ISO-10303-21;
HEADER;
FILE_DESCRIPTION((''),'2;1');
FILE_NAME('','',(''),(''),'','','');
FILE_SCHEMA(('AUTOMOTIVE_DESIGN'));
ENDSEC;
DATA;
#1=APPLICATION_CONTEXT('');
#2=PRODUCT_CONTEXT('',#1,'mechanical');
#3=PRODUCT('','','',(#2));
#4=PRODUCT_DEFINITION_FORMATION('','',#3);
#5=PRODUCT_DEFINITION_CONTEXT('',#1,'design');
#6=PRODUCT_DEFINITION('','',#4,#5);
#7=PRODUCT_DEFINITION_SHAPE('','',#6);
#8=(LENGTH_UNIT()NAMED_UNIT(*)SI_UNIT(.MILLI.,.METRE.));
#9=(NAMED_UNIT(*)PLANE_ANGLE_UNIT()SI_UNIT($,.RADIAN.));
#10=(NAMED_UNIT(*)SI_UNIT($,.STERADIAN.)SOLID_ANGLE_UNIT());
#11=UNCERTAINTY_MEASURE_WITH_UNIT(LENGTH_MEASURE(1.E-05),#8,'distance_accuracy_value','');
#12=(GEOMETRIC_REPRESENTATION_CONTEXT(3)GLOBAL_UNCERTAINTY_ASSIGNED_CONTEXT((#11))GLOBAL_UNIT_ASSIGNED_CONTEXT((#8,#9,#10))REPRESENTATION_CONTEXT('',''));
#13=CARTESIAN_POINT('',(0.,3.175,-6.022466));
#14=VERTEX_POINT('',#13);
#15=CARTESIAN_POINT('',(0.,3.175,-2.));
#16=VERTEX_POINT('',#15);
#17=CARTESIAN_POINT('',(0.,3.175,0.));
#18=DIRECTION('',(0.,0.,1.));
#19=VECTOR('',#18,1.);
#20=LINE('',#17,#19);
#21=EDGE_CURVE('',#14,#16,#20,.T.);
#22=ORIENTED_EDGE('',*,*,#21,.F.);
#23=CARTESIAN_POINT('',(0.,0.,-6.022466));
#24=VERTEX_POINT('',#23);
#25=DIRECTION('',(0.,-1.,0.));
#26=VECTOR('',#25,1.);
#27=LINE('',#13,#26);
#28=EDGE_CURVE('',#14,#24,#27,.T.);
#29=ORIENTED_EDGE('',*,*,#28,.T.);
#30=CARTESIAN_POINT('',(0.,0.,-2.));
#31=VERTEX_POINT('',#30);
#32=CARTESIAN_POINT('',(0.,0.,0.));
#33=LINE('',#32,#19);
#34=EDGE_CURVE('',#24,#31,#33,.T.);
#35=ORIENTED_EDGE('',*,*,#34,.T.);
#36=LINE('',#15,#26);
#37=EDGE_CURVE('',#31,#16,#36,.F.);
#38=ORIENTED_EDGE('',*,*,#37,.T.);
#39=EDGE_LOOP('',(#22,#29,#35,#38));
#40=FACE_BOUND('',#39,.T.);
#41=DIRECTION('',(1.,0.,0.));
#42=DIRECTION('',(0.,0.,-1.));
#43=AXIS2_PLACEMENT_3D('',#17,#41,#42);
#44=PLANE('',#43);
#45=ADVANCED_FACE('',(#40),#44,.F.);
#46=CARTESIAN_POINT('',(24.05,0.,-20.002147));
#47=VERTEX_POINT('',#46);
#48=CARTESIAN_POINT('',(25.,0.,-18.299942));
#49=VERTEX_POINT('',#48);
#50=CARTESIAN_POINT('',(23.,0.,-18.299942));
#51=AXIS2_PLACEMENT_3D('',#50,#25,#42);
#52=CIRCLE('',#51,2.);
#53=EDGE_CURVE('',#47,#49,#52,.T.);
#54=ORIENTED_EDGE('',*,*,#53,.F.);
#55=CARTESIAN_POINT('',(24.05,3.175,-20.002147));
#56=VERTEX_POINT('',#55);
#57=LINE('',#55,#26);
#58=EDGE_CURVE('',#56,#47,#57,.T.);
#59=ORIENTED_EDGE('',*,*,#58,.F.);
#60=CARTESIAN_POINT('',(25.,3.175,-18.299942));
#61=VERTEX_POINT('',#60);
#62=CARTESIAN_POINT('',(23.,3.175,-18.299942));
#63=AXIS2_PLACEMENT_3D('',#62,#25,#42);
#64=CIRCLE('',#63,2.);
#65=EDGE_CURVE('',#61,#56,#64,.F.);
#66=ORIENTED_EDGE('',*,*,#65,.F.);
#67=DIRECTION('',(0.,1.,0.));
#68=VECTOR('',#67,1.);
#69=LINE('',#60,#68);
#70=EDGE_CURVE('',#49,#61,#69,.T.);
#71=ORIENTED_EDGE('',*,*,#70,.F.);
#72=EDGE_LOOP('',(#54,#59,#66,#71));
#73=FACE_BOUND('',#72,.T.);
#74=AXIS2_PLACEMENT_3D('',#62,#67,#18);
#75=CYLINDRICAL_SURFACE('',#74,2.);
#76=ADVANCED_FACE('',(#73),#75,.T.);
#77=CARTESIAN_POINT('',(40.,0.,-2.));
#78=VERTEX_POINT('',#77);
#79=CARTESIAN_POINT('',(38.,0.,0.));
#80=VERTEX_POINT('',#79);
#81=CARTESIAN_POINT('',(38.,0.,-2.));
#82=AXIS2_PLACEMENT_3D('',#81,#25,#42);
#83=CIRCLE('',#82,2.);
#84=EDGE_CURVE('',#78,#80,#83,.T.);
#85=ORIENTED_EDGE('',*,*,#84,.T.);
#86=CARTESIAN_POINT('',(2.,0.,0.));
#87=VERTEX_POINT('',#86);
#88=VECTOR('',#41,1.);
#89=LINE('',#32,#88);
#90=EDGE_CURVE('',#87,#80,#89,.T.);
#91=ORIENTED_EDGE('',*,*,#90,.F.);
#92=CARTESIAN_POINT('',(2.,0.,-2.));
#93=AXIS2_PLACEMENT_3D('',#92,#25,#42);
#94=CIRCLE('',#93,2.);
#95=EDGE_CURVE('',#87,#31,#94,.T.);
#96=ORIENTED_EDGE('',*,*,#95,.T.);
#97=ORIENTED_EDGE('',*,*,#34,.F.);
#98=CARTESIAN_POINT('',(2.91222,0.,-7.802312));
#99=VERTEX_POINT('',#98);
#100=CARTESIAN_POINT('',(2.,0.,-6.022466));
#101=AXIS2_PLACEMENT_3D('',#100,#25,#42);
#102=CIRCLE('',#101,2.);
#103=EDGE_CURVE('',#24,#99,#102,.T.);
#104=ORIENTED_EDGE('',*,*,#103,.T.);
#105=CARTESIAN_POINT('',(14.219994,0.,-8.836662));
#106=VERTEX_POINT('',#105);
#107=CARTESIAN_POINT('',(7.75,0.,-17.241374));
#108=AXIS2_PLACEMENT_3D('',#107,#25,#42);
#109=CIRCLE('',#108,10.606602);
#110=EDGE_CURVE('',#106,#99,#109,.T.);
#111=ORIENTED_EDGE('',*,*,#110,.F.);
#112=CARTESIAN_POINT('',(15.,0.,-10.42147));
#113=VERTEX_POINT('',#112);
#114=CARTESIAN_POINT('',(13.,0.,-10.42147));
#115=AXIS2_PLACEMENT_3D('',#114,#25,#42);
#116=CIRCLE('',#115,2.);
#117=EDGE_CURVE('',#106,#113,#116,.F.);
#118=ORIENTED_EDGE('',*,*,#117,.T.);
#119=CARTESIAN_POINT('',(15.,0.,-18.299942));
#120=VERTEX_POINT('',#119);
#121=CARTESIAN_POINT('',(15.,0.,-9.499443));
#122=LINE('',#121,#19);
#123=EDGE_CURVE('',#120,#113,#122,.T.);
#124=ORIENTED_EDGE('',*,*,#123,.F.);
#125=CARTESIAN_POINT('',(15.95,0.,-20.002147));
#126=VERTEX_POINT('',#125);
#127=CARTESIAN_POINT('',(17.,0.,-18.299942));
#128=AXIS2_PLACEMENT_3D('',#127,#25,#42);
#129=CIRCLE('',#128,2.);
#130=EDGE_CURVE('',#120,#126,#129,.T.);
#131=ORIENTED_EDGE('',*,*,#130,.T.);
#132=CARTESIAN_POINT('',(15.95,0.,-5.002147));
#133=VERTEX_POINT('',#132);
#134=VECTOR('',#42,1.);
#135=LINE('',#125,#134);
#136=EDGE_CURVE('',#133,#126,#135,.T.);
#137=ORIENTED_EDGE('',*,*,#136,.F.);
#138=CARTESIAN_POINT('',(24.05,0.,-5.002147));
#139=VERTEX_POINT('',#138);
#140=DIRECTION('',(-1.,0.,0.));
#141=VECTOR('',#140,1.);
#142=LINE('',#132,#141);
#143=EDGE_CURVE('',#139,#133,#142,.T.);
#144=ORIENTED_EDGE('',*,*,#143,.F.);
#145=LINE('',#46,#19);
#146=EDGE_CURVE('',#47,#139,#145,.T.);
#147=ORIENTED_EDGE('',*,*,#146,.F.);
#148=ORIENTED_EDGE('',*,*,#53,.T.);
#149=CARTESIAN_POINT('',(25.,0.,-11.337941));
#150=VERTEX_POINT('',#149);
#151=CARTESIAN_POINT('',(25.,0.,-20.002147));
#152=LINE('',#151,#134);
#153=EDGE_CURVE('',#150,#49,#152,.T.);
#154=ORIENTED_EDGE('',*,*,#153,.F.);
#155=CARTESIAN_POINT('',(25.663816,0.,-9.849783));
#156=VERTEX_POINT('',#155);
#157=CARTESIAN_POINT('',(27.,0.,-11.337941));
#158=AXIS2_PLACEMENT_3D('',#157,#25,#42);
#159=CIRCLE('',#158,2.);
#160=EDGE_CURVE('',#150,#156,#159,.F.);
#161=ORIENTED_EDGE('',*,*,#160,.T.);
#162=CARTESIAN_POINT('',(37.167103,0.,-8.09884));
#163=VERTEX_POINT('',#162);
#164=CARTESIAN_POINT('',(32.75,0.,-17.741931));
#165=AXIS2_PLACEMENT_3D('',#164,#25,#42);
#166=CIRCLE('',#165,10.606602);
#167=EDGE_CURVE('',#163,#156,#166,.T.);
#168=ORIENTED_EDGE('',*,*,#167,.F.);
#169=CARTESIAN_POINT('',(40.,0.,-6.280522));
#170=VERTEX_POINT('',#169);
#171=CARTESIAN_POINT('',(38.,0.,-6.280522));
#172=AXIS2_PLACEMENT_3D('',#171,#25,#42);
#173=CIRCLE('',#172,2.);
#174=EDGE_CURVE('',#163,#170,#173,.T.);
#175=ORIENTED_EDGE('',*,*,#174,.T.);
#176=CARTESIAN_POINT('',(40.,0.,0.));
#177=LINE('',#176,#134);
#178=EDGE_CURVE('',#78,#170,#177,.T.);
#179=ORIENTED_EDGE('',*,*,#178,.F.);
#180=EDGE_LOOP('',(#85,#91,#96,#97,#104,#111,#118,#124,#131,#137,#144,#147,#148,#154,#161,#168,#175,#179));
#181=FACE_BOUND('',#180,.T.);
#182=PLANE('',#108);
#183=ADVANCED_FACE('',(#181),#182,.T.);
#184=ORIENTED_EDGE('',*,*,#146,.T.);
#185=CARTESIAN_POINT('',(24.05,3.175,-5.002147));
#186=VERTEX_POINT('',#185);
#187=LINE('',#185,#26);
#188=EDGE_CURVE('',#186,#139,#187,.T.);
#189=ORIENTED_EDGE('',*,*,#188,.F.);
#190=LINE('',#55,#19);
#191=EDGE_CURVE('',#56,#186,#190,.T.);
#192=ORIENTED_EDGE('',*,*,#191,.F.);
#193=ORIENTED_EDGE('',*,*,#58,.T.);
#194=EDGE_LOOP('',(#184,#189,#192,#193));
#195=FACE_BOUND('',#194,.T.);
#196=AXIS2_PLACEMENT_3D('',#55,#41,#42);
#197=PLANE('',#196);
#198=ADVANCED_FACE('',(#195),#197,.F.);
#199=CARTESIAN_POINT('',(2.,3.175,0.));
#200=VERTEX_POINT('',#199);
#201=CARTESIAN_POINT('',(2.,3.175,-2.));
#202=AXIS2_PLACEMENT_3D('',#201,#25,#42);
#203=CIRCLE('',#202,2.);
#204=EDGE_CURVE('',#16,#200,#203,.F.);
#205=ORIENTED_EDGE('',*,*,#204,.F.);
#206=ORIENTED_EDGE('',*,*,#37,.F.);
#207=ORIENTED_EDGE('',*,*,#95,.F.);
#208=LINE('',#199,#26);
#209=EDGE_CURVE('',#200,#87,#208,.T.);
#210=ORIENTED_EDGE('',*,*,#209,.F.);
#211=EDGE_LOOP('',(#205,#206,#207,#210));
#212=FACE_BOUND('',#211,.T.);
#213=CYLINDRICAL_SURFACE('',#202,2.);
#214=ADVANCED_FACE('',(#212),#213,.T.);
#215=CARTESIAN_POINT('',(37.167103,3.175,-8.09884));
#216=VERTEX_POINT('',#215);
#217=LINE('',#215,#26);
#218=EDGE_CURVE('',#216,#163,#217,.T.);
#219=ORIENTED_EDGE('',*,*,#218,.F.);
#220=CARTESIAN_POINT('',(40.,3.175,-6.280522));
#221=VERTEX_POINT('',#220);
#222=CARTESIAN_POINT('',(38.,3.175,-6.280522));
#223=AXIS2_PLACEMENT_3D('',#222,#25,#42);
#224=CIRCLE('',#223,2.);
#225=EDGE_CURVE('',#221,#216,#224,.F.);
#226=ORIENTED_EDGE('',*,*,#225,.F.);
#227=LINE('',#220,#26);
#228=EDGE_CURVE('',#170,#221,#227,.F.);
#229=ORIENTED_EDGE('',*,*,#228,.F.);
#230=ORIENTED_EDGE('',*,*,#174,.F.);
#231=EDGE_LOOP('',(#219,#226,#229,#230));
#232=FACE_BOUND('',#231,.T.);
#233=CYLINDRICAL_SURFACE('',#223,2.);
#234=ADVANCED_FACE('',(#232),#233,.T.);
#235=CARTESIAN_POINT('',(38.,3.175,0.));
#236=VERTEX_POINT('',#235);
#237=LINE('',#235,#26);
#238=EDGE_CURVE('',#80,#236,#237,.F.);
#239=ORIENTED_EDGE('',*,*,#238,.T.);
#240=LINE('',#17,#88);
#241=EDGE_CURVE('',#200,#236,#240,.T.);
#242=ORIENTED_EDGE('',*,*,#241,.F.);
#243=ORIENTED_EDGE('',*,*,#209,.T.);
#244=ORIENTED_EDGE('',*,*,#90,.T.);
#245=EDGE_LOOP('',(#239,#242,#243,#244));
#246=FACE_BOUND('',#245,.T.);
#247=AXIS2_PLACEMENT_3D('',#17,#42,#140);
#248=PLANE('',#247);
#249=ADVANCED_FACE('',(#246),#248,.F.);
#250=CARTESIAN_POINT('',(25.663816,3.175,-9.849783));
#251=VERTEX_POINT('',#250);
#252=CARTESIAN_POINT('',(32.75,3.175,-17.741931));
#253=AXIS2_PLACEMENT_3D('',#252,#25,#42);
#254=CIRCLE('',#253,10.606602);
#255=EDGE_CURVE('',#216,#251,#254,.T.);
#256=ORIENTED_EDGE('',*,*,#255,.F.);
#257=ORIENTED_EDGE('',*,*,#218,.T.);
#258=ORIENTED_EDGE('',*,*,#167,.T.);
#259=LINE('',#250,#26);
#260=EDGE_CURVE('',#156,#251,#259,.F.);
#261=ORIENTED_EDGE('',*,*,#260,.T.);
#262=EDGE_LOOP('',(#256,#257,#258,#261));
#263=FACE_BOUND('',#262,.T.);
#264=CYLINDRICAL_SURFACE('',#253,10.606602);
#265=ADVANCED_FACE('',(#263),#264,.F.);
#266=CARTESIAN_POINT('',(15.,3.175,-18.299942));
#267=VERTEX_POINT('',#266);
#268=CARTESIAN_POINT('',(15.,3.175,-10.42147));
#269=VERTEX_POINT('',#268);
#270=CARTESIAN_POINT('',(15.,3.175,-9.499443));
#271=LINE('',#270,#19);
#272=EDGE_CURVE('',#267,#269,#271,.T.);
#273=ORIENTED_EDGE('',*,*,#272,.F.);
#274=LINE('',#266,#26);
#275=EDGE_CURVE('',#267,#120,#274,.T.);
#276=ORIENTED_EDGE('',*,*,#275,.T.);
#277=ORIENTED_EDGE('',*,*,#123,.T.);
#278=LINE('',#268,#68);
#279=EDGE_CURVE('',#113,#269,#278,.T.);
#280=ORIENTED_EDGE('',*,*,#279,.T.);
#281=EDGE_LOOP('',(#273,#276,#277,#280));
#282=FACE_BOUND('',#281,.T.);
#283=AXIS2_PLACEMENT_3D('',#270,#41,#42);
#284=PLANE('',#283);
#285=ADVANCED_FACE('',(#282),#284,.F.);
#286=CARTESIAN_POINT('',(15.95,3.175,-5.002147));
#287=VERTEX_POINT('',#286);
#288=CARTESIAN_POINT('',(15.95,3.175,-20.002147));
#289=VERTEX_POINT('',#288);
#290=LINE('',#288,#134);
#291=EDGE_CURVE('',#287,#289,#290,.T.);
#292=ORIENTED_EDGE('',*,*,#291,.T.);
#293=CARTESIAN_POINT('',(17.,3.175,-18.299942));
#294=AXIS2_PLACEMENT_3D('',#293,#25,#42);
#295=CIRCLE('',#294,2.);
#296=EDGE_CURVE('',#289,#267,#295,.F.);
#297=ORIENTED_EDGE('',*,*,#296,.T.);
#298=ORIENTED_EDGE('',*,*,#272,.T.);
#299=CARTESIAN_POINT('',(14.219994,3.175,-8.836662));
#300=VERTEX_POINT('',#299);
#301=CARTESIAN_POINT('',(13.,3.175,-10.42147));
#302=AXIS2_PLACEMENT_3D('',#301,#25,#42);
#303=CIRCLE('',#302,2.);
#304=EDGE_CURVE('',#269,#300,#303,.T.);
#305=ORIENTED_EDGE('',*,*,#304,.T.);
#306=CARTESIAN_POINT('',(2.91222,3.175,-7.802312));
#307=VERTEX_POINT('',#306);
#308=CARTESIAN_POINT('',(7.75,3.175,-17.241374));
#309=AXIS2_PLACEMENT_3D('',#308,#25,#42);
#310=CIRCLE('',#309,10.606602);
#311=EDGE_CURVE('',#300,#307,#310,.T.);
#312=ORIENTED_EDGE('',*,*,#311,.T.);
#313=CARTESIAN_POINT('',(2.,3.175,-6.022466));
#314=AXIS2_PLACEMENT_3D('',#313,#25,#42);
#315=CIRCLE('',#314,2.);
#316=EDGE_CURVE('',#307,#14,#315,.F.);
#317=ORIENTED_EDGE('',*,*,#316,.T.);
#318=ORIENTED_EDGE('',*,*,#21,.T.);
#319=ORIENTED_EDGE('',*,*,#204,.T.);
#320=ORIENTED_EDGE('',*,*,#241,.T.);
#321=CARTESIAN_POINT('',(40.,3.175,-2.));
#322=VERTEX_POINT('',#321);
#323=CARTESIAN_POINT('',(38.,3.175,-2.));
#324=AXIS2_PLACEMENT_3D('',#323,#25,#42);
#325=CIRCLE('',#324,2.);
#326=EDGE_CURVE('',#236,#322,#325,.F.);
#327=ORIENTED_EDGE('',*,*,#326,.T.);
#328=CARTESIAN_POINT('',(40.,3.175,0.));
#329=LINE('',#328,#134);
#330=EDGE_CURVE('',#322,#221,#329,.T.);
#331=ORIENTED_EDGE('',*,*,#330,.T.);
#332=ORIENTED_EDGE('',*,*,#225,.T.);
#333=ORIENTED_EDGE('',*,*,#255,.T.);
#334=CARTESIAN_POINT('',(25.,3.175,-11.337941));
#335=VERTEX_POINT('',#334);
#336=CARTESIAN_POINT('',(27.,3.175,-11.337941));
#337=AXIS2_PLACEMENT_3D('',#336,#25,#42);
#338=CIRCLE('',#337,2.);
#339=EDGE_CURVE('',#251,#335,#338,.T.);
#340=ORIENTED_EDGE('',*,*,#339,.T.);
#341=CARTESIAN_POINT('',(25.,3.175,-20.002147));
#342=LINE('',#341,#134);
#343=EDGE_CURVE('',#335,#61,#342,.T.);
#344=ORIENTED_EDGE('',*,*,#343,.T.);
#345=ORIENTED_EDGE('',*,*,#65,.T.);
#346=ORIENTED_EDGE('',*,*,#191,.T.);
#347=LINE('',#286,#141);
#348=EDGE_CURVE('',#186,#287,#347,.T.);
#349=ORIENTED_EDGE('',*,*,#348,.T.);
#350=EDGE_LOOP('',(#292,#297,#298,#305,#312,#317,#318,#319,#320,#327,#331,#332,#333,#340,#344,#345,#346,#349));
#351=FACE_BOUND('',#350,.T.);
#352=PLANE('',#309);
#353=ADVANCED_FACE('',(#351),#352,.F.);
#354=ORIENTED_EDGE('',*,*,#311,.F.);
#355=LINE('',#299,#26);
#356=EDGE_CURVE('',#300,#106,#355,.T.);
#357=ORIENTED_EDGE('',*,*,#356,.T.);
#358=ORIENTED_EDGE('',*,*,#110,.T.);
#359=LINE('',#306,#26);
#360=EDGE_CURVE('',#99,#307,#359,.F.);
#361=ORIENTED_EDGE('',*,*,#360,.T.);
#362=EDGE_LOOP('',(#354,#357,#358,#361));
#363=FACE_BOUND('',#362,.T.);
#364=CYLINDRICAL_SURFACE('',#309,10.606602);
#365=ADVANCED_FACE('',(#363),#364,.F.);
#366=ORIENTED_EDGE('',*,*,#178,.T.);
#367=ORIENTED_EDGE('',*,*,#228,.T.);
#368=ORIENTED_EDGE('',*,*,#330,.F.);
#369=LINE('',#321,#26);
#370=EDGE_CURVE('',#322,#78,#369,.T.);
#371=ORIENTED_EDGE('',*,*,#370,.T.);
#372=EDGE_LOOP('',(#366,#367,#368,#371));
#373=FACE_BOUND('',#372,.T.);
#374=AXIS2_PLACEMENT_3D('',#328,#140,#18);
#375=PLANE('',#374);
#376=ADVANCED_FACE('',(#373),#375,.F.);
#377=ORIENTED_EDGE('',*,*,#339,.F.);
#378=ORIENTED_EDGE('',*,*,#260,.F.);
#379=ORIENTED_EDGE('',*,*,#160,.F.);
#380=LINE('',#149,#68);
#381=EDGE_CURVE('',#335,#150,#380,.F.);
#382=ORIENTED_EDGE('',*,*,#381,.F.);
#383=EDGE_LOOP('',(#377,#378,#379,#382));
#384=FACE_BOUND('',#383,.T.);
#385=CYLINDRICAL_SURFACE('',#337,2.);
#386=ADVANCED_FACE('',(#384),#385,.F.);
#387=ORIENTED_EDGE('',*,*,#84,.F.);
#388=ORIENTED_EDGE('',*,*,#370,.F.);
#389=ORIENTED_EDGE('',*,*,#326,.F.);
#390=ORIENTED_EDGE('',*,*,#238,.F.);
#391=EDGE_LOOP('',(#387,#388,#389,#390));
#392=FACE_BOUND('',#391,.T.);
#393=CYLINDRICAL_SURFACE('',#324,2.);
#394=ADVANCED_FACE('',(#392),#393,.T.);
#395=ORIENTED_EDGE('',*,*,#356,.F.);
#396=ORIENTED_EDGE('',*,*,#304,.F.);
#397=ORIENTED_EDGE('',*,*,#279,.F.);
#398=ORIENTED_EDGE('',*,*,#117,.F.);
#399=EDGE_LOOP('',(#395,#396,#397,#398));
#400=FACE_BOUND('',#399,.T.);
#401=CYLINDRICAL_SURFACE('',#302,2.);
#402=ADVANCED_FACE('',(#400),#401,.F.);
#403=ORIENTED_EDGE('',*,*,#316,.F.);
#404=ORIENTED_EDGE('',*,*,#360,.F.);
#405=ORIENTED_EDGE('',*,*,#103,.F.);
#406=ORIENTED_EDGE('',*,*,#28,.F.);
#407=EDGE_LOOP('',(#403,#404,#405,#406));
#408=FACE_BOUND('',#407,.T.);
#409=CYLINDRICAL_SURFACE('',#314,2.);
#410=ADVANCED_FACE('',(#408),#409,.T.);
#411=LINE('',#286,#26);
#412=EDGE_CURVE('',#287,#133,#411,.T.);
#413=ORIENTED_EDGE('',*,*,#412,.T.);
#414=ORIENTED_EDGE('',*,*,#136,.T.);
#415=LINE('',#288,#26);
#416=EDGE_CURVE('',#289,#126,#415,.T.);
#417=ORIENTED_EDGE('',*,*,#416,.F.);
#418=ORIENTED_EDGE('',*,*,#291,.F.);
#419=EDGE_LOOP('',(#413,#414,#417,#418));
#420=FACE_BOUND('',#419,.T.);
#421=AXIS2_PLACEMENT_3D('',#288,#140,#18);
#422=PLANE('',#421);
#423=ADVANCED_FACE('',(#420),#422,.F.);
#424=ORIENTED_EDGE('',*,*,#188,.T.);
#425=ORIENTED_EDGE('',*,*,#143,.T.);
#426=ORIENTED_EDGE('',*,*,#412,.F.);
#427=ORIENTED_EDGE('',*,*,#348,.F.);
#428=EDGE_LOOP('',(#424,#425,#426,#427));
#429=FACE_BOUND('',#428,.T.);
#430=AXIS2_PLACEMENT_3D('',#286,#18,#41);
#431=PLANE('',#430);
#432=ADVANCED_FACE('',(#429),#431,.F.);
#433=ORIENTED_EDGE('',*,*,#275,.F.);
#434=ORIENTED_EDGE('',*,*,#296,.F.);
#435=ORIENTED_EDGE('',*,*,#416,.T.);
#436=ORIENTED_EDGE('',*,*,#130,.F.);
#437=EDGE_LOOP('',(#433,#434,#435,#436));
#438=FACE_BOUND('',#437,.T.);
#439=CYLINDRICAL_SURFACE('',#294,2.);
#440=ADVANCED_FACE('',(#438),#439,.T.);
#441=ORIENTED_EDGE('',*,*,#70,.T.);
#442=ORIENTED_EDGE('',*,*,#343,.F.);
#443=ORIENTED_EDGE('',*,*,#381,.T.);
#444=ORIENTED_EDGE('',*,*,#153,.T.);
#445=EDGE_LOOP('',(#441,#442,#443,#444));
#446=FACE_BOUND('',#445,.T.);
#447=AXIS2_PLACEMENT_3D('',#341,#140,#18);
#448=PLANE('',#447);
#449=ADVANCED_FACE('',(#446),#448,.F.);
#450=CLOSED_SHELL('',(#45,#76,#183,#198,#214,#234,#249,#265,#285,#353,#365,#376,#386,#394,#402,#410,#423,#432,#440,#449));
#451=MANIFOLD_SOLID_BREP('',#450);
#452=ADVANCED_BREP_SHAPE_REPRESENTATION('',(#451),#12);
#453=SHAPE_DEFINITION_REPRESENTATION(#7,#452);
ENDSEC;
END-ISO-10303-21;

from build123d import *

# Parameters (mm, degrees)
BOSS_EXTRUDE1_DEPTH = 3.175
FILLET1_R           = 2
FILLET2_R           = 2
FILLET3_R           = 2


with BuildPart() as part:
    # Sketch2 → Boss-Extrude1 (new body)
    with BuildSketch(Plane(origin=(0, 0, 0), x_dir=(1, 0, 0), z_dir=(0, 1, 0))):
        with BuildLine():
            Line((0, 0), (40, 0))
            Line((40, 0), (40, 10))
            ThreePointArc((40, 10), (32.396249588, 7.141230333), (25, 10.500557105))
            Line((25, 10.500557105), (25, 20.002146828))
            Line((25, 20.002146828), (24.05, 20.002146828))
            Line((24.05, 20.002146828), (24.05, 5.002146828))
            Line((24.05, 5.002146828), (15.95, 5.002146828))
            Line((15.95, 5.002146828), (15.95, 20.002146828))
            Line((15.95, 20.002146828), (15, 20.002146828))
            Line((15, 20.002146828), (15, 9.499442895))
            ThreePointArc((15, 9.499442895), (7.396249588, 6.640673228), (0, 10))
            Line((0, 10), (0, 0))
        make_face()
    extrude(amount=BOSS_EXTRUDE1_DEPTH)

    # Fillet1
    fillet1_edges = [part.edges().sort_by_distance(p)[0] for p in [
        (15, 1.5875, -9.499442895),
        (25, 1.5875, -10.500557105),
    ]]
    fillet(fillet1_edges, radius=FILLET1_R)

    # Fillet2
    # the kernel refuses this fillet: 2 mm, written as the material it takes off along each edge
    with BuildSketch(Plane(origin=(25, -4.255511133, -20.002146828), x_dir=(0, 0, 1), z_dir=(0, 1, 0))) as fillet2_piece_1:
        with BuildLine():
            CenterArc((1.702204453, -2), FILLET2_R, 90, 58.331756746)
            Line((0, -0.95), (-0.034044089, -0.929))
            ThreePointArc((-0.034044089, -0.929), (-0.04, -0.475), (-0.04, 0))
            Line((-0.04, 0), (0, 0.04))
            Line((0, 0.04), (1.702204453, 0.04))
            Line((1.702204453, 0.04), (1.702204453, 0))
        make_face()
    extrude(amount=11.686022265, mode=Mode.SUBTRACT)
    with BuildSketch(Plane(origin=(15, -4.255511133, -20.002146828), x_dir=(0, 0, 1), z_dir=(0, 1, 0))) as fillet2_piece_2:
        with BuildLine():
            CenterArc((1.702204453, 2), FILLET2_R, 211.668243254, 58.331756746)
            Line((0, 0.95), (-0.034044089, 0.929))
            ThreePointArc((-0.034044089, 0.929), (-0.04, 0.475), (-0.04, 0))
            Line((-0.04, 0), (0, -0.04))
            Line((0, -0.04), (1.702204453, -0.04))
            Line((1.702204453, -0.04), (1.702204453, 0))
        make_face()
    extrude(amount=11.686022265, mode=Mode.SUBTRACT)
    with BuildSketch(Plane(origin=(0, -9.943835684, -10), x_dir=(0, 0, 1), z_dir=(0, 1, 0))) as fillet2_piece_3:
        with BuildLine():
            CenterArc((3.977534274, 2), FILLET2_R, 152.863608887, 117.136391113)
            Line((2.197687698, 2.912220459), (2.162090766, 2.930464868))
            ThreePointArc((2.162090766, 2.930464868), (1.193071422, 1.385002021), (-0.027308932, 0.02922708))
            Line((-0.027308932, 0.02922708), (0, -0.04))
            Line((0, -0.04), (3.977534274, -0.04))
            Line((3.977534274, -0.04), (3.977534274, 0))
        make_face()
    extrude(amount=23.062671369, mode=Mode.SUBTRACT)
    with BuildSketch(Plane(origin=(40, -9.298695448, -10), x_dir=(-0.8303470474110474, 0, 0.5572466068588987), z_dir=(0, 1, 0))) as fillet2_piece_4:
        with BuildLine():
            CenterArc((3.733360689, 1.97396451), FILLET2_R, 146.134404681, 114.610566722)
            Line((2.072666595, 3.088457724), (2.039452713, 3.110747588))
            Line((2.039452713, 3.110747588), (-0.033213882, 0.022289864))
            Line((-0.033213882, 0.022289864), (0.006433168, -0.03947929))
            ThreePointArc((0.006433168, -0.03947929), (1.705851155, 0.098074035), (3.405269143, -0.03947929))
            Line((3.405269143, -0.03947929), (3.411702311, 0))
        make_face()
    extrude(amount=21.772390895, mode=Mode.SUBTRACT)

    # Fillet3
    fillet3_edges = [part.edges().sort_by_distance(p)[0] for p in [
        (40, 1.5875, 0),
        (0, 1.5875, 0),
    ]]
    fillet(fillet3_edges, radius=FILLET3_R)


solid = part.part
